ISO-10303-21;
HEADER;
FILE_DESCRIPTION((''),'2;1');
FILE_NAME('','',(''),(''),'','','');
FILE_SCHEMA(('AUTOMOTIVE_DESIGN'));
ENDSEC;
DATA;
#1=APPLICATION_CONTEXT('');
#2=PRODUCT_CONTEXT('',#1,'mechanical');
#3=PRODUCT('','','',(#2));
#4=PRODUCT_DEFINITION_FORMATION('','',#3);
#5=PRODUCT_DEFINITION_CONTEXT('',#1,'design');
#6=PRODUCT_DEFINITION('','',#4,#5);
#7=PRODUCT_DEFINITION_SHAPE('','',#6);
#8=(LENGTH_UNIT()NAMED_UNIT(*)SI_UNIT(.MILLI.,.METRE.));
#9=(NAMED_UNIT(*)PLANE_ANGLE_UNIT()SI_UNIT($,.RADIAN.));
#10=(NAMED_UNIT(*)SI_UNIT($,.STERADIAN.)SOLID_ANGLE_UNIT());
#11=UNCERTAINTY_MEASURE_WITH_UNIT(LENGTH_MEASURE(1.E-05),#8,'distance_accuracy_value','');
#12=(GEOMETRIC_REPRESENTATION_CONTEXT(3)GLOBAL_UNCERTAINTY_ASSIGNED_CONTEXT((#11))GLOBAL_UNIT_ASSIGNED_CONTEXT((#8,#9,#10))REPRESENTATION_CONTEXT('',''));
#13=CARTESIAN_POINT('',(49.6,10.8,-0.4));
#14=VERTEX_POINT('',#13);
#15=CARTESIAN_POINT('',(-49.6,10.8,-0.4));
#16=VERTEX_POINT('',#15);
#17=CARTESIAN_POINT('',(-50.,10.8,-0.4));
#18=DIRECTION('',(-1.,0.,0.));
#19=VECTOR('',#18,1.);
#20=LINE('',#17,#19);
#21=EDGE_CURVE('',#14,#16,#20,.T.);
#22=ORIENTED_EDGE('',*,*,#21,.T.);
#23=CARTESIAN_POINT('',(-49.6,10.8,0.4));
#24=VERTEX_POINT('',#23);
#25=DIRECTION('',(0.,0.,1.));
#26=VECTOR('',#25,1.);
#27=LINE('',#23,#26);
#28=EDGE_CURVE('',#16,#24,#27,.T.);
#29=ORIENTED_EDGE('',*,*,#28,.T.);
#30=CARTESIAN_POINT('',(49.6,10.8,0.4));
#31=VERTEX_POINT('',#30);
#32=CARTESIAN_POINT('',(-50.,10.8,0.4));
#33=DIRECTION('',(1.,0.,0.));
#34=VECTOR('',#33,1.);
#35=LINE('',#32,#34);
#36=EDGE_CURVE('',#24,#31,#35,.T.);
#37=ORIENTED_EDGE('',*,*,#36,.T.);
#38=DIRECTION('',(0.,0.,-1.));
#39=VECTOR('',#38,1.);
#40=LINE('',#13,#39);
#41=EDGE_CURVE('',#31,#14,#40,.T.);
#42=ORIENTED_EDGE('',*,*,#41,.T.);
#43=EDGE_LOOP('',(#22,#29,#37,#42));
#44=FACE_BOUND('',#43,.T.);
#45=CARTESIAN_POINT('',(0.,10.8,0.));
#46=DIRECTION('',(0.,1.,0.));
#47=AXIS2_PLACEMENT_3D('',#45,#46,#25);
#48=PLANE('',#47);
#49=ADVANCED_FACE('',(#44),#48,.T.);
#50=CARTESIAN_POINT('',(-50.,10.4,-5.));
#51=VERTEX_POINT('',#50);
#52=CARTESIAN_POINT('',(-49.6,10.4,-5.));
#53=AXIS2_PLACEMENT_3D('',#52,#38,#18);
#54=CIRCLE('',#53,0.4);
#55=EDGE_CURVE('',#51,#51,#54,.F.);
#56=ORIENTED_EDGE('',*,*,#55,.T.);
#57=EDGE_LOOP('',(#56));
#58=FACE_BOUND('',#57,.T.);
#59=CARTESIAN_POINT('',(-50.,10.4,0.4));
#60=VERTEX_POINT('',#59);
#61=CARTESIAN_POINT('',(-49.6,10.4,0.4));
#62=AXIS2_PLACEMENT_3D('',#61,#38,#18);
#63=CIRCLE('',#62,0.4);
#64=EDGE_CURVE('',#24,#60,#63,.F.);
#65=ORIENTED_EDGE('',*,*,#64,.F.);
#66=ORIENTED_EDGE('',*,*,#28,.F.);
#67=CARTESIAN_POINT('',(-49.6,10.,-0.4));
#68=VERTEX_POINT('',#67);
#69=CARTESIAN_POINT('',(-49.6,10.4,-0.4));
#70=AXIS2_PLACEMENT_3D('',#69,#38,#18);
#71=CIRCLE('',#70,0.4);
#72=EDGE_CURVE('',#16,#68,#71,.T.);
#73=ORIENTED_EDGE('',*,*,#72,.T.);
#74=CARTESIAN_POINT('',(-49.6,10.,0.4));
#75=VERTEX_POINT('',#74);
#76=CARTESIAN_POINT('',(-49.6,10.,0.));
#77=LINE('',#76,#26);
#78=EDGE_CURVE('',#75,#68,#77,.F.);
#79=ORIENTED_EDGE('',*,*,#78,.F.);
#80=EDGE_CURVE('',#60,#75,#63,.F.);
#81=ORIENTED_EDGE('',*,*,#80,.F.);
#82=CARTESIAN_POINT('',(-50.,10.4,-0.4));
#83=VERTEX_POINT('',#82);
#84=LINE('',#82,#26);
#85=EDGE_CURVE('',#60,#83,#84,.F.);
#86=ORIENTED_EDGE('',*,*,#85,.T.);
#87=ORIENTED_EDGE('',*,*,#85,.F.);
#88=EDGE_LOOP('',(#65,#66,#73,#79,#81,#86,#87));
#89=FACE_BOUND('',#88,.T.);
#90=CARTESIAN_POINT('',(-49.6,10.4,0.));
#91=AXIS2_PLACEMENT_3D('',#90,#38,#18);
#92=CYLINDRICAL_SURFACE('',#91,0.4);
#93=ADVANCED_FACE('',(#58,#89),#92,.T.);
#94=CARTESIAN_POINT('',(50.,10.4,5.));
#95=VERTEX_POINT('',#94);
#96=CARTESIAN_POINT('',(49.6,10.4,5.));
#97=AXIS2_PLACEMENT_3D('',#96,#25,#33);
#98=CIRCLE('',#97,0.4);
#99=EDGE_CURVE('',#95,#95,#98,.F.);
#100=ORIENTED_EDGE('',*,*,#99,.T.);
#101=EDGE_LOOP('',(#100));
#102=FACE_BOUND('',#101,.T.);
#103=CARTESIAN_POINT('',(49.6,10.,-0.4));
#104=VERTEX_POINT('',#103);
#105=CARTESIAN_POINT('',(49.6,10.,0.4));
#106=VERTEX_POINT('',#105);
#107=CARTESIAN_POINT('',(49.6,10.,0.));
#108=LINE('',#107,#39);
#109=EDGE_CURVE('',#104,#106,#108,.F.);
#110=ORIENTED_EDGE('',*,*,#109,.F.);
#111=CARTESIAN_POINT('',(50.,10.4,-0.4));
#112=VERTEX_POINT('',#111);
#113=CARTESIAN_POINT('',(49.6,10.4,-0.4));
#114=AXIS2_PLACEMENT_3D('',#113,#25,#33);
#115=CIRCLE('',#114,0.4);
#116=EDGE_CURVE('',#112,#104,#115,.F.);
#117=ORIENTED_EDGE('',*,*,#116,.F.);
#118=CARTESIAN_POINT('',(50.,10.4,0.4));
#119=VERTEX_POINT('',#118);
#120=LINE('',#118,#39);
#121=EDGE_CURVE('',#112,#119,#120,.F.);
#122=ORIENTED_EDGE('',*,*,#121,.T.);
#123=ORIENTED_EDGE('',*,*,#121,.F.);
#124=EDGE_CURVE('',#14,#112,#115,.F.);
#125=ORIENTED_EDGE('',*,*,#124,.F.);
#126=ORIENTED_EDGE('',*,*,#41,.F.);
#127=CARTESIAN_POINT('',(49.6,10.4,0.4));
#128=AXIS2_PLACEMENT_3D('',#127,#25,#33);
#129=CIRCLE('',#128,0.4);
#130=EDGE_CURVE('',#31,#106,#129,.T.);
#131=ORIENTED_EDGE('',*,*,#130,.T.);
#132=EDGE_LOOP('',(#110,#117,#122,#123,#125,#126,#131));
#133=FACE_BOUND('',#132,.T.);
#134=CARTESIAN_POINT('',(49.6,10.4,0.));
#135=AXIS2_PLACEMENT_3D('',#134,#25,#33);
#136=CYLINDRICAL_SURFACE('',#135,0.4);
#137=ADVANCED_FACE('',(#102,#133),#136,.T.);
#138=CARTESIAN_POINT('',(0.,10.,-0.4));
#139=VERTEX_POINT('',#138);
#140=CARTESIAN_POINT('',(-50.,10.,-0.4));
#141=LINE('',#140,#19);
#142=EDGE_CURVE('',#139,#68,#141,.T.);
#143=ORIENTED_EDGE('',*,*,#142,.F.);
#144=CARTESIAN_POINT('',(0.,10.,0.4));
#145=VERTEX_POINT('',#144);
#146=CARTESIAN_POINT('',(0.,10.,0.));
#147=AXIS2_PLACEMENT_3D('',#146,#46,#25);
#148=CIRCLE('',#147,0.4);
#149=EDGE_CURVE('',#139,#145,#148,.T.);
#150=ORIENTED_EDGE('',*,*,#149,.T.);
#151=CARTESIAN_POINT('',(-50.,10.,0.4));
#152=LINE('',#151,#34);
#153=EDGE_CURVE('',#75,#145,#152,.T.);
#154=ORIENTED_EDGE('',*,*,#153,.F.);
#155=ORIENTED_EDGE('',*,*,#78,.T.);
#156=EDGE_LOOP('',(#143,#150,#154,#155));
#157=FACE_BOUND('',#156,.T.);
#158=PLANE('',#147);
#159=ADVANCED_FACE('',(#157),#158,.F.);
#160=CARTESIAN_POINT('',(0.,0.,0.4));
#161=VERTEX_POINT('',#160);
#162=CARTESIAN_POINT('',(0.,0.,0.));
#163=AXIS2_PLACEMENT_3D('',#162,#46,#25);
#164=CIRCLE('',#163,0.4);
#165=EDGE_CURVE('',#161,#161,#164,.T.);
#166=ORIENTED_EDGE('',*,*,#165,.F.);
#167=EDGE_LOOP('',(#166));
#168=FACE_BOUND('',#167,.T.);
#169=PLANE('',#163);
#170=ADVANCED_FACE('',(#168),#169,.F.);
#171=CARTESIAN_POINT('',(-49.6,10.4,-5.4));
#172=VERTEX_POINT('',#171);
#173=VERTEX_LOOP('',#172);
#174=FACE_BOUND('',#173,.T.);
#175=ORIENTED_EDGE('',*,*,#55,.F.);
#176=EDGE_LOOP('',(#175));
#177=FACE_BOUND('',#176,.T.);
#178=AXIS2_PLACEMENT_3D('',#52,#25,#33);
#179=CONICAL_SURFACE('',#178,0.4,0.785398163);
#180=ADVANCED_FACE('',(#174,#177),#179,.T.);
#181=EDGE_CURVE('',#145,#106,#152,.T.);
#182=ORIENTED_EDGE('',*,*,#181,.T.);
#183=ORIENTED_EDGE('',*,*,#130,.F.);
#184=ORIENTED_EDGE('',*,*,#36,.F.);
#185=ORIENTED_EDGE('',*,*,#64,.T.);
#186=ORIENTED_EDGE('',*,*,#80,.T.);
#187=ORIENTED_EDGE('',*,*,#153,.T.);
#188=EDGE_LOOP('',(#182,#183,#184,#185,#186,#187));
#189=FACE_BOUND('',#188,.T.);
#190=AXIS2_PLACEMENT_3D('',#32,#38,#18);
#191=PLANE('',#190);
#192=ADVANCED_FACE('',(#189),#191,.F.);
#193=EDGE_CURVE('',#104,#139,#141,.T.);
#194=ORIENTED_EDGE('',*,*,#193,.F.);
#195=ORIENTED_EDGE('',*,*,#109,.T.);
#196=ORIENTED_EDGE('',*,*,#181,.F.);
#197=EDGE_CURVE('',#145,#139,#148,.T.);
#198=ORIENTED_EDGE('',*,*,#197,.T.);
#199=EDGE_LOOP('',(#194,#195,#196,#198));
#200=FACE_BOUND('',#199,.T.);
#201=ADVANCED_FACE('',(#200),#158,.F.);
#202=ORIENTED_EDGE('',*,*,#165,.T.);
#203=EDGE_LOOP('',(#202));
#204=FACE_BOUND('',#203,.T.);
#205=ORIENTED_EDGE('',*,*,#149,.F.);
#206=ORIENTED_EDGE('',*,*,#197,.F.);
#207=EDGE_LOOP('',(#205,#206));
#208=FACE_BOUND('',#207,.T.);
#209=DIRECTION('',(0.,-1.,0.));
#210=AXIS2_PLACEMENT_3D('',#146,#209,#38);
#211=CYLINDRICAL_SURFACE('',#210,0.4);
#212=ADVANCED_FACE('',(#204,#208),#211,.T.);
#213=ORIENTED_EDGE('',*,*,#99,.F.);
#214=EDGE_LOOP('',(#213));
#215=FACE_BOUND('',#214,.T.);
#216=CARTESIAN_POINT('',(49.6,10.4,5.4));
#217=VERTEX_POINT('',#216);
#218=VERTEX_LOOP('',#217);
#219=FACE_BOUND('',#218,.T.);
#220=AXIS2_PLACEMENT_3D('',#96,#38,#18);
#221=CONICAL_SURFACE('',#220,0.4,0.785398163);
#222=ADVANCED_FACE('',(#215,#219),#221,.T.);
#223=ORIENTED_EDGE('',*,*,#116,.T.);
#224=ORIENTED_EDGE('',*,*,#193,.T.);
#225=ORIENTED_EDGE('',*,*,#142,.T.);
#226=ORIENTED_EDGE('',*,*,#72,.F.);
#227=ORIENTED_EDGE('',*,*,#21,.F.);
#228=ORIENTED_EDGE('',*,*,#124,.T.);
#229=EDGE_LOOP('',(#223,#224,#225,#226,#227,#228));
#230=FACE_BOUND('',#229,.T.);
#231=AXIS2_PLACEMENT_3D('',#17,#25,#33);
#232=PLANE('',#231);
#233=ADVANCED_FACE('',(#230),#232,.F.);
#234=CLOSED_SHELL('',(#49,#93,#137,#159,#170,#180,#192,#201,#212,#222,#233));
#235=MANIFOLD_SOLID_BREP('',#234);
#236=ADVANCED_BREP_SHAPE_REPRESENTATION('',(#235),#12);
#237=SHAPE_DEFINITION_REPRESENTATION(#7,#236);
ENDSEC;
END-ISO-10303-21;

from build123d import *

# Parameters (mm, degrees)
SKETCH_1_R      = 0.4
EXTRUDE_1_DEPTH = 10
SKETCH_2_W      = 100
SKETCH_2_H      = 0.8
EXTRUDE_2_DEPTH = 0.8
FILLET_1_R      = 0.4
SKETCH_3_R      = 0.4
EXTRUDE_3_DEPTH = 5
SKETCH_4_R      = 0.4
EXTRUDE_4_DEPTH = 5
CHAMFER_1_SIZE  = 0.4


with BuildPart() as part:
    # 草图1 → 凸台-拉伸1 (new body)
    with BuildSketch(Plane(origin=(0, 0, 0), x_dir=(1, 0, 0), z_dir=(0, 1, 0))):
        with Locations(Location((0, 0, 0), (0, 0, 270))):
            Circle(SKETCH_1_R)
    extrude(amount=EXTRUDE_1_DEPTH)

    # 草图2 → 凸台-拉伸2 (add)
    with BuildSketch(Plane(origin=(0, 10, 0), x_dir=(1, 0, 0), z_dir=(0, 1, 0))):
        Rectangle(SKETCH_2_W, SKETCH_2_H)
    extrude(amount=EXTRUDE_2_DEPTH)

    # 圆角1
    fillet_1_edges = [part.edges().sort_by_distance(p)[0] for p in [
        (50, 10, 0),
        (50, 10.8, 0),
        (-50, 10, 0),
        (-50, 10.8, 0),
    ]]
    fillet(fillet_1_edges, radius=FILLET_1_R - 0.0001)  # a hair under: the kernel refuses the full size

    # 草图3 → 凸台-拉伸3 (add)
    with BuildSketch(Plane.XY.offset(0.4)):
        with Locations((49.6, 10.4)):
            Circle(SKETCH_3_R)
    extrude(amount=EXTRUDE_3_DEPTH)

    # 草图4 → 凸台-拉伸4 (add)
    with BuildSketch(Plane(origin=(0, 0, -0.4), x_dir=(-1, 0, 0), z_dir=(0, 0, -1))):
        with Locations((49.6, 10.4)):
            Circle(SKETCH_4_R)
    extrude(amount=EXTRUDE_4_DEPTH)

    # 倒角1
    chamfer_1_edges = [part.edges().sort_by_distance(p)[0] for p in [
        (49.2, 10.4, 5.4),
        (-49.2, 10.4, -5.4),
    ]]
    chamfer(chamfer_1_edges, length=CHAMFER_1_SIZE)


solid = part.part
